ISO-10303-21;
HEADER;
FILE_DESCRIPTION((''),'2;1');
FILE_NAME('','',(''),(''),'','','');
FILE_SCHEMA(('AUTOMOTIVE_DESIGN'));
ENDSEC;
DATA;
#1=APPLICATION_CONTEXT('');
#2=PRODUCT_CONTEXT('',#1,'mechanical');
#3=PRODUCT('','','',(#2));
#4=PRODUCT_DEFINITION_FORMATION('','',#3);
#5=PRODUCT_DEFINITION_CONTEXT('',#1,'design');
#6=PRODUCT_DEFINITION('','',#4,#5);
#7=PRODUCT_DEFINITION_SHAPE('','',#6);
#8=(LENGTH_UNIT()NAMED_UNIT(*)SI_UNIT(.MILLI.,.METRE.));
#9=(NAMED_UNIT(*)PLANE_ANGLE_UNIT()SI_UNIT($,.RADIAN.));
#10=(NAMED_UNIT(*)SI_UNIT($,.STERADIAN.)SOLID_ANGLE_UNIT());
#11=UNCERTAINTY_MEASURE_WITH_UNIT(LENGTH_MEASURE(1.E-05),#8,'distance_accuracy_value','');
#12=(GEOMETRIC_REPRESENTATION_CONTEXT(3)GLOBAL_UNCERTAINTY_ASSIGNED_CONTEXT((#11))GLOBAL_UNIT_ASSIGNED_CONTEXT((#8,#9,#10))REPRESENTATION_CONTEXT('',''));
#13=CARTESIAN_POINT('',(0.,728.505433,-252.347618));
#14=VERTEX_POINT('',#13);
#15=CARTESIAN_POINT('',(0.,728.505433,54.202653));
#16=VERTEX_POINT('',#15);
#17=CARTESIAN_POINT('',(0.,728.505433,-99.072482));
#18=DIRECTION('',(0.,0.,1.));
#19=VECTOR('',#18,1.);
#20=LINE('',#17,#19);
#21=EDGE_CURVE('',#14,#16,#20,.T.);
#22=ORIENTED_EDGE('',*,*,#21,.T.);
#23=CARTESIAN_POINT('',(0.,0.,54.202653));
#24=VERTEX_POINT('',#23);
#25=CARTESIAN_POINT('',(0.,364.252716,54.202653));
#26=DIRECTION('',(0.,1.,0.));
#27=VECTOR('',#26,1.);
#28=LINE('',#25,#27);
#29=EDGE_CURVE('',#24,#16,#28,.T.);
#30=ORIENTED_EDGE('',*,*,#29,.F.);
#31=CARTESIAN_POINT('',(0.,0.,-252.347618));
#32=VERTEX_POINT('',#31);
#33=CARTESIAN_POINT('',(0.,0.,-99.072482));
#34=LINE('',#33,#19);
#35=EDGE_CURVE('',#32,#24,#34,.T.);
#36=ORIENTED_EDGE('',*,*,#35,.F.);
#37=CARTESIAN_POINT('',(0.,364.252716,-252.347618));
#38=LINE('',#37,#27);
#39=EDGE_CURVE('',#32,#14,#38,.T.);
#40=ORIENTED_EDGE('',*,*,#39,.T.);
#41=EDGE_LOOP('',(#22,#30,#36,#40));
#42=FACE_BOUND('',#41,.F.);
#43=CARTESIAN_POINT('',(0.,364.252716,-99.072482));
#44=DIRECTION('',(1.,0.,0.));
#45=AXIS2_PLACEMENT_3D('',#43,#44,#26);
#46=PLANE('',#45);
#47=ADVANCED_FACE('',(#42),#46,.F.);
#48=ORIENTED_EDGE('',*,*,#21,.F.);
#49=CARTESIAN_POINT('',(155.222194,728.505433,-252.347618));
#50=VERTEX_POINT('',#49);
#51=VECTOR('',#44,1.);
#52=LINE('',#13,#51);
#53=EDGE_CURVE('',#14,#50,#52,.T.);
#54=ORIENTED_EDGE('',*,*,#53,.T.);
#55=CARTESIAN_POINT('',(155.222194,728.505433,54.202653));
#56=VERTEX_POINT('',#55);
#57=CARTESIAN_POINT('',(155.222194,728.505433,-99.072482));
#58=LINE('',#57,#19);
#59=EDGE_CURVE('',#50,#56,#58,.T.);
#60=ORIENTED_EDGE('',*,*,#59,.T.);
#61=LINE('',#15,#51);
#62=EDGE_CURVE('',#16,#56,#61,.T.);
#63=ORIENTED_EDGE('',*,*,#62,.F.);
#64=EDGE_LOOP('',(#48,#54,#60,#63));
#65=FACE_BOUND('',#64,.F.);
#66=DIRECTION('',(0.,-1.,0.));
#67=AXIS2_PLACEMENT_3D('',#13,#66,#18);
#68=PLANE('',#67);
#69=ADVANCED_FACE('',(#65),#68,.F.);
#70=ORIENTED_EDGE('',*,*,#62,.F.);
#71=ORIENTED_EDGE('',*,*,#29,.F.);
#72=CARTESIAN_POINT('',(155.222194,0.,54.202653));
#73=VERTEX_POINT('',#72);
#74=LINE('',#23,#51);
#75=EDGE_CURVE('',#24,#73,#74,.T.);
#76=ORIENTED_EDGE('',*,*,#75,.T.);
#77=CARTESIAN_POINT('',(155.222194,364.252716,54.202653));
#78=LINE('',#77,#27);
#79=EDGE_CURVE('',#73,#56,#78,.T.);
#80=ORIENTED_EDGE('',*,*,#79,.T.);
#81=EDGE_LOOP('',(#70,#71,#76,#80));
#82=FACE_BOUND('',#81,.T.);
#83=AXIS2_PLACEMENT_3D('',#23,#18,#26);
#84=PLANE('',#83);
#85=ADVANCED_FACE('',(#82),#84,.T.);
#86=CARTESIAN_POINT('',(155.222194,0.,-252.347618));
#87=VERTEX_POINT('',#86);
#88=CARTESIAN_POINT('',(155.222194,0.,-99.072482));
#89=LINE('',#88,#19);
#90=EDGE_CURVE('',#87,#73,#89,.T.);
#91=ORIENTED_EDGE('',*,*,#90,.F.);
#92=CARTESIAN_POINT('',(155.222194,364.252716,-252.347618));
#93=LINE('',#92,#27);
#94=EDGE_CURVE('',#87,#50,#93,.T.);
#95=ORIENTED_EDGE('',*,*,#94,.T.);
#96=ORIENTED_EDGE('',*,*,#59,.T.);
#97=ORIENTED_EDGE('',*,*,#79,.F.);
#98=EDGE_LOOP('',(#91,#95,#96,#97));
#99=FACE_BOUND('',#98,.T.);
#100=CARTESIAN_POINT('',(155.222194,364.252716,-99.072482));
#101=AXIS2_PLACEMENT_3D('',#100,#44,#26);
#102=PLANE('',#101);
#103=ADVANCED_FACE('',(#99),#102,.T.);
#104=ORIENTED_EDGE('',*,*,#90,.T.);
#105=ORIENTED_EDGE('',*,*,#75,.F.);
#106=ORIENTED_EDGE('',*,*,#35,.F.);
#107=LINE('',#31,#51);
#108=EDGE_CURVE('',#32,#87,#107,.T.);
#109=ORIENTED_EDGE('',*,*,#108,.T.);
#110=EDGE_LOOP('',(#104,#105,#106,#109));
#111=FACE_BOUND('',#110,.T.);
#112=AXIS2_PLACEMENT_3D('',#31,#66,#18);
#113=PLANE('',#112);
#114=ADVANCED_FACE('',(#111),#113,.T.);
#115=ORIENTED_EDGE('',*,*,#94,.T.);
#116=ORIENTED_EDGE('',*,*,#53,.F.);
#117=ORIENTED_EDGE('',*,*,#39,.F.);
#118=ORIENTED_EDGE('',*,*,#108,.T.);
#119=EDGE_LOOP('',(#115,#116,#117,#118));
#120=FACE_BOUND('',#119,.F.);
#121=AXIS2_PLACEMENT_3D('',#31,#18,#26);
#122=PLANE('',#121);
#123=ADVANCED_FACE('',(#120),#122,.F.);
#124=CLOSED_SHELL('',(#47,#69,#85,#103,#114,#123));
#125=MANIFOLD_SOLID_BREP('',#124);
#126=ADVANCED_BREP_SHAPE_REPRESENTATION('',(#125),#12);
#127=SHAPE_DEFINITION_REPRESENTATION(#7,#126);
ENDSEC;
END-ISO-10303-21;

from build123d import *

# Parameters (mm, degrees)
F0_W      = 728.5054326057
F0_H      = 306.5502718091
F1_DEPTH  = 155.222194
F2_R      = 50.8
F3_DEPTH  = 7.62
F1_FACE_W = 728.5054326057
F1_FACE_H = 306.5502718091
F4_DEPTH  = 1191


# Not quite as in the source:
# - an extrude ends at something that could not be found from the text; its depth is read off the source's solid
# - a feature names something its author has since deleted; it is built from what else it names


with BuildPart() as f1:
    # F0 (on Right) → F1 (new body)
    with BuildSketch(Plane.YZ):
        with Locations((364.2527163029, -99.0724824369)):
            Rectangle(F0_W, F0_H)
    extrude(amount=F1_DEPTH)

    # F2 (on face) → F3 (join)
    with BuildSketch(Plane(origin=(0, 0, 0), x_dir=(0, -1, 0), z_dir=(-1, 0, 0))):
        with Locations((-335.2750743124, -123.5973465323)):
            Circle(F2_R)
    extrude(amount=-F3_DEPTH)

    # F2 (on face) + F1_face (on face) → F4 (cut, through all)
    with BuildSketch(Plane(origin=(0, 0, 0), x_dir=(0, -1, 0), z_dir=(-1, 0, 0))):
        with Locations((-335.2750743124, -123.5973465323)):
            Circle(F2_R)
    with BuildSketch(Plane(origin=(0, 364.2527163029, -99.0724824369), x_dir=(0, 1, 0), z_dir=(-1, 0, 0))):
        Rectangle(F1_FACE_W, F1_FACE_H)
    extrude(amount=F4_DEPTH, mode=Mode.SUBTRACT)


solid = f1.part
